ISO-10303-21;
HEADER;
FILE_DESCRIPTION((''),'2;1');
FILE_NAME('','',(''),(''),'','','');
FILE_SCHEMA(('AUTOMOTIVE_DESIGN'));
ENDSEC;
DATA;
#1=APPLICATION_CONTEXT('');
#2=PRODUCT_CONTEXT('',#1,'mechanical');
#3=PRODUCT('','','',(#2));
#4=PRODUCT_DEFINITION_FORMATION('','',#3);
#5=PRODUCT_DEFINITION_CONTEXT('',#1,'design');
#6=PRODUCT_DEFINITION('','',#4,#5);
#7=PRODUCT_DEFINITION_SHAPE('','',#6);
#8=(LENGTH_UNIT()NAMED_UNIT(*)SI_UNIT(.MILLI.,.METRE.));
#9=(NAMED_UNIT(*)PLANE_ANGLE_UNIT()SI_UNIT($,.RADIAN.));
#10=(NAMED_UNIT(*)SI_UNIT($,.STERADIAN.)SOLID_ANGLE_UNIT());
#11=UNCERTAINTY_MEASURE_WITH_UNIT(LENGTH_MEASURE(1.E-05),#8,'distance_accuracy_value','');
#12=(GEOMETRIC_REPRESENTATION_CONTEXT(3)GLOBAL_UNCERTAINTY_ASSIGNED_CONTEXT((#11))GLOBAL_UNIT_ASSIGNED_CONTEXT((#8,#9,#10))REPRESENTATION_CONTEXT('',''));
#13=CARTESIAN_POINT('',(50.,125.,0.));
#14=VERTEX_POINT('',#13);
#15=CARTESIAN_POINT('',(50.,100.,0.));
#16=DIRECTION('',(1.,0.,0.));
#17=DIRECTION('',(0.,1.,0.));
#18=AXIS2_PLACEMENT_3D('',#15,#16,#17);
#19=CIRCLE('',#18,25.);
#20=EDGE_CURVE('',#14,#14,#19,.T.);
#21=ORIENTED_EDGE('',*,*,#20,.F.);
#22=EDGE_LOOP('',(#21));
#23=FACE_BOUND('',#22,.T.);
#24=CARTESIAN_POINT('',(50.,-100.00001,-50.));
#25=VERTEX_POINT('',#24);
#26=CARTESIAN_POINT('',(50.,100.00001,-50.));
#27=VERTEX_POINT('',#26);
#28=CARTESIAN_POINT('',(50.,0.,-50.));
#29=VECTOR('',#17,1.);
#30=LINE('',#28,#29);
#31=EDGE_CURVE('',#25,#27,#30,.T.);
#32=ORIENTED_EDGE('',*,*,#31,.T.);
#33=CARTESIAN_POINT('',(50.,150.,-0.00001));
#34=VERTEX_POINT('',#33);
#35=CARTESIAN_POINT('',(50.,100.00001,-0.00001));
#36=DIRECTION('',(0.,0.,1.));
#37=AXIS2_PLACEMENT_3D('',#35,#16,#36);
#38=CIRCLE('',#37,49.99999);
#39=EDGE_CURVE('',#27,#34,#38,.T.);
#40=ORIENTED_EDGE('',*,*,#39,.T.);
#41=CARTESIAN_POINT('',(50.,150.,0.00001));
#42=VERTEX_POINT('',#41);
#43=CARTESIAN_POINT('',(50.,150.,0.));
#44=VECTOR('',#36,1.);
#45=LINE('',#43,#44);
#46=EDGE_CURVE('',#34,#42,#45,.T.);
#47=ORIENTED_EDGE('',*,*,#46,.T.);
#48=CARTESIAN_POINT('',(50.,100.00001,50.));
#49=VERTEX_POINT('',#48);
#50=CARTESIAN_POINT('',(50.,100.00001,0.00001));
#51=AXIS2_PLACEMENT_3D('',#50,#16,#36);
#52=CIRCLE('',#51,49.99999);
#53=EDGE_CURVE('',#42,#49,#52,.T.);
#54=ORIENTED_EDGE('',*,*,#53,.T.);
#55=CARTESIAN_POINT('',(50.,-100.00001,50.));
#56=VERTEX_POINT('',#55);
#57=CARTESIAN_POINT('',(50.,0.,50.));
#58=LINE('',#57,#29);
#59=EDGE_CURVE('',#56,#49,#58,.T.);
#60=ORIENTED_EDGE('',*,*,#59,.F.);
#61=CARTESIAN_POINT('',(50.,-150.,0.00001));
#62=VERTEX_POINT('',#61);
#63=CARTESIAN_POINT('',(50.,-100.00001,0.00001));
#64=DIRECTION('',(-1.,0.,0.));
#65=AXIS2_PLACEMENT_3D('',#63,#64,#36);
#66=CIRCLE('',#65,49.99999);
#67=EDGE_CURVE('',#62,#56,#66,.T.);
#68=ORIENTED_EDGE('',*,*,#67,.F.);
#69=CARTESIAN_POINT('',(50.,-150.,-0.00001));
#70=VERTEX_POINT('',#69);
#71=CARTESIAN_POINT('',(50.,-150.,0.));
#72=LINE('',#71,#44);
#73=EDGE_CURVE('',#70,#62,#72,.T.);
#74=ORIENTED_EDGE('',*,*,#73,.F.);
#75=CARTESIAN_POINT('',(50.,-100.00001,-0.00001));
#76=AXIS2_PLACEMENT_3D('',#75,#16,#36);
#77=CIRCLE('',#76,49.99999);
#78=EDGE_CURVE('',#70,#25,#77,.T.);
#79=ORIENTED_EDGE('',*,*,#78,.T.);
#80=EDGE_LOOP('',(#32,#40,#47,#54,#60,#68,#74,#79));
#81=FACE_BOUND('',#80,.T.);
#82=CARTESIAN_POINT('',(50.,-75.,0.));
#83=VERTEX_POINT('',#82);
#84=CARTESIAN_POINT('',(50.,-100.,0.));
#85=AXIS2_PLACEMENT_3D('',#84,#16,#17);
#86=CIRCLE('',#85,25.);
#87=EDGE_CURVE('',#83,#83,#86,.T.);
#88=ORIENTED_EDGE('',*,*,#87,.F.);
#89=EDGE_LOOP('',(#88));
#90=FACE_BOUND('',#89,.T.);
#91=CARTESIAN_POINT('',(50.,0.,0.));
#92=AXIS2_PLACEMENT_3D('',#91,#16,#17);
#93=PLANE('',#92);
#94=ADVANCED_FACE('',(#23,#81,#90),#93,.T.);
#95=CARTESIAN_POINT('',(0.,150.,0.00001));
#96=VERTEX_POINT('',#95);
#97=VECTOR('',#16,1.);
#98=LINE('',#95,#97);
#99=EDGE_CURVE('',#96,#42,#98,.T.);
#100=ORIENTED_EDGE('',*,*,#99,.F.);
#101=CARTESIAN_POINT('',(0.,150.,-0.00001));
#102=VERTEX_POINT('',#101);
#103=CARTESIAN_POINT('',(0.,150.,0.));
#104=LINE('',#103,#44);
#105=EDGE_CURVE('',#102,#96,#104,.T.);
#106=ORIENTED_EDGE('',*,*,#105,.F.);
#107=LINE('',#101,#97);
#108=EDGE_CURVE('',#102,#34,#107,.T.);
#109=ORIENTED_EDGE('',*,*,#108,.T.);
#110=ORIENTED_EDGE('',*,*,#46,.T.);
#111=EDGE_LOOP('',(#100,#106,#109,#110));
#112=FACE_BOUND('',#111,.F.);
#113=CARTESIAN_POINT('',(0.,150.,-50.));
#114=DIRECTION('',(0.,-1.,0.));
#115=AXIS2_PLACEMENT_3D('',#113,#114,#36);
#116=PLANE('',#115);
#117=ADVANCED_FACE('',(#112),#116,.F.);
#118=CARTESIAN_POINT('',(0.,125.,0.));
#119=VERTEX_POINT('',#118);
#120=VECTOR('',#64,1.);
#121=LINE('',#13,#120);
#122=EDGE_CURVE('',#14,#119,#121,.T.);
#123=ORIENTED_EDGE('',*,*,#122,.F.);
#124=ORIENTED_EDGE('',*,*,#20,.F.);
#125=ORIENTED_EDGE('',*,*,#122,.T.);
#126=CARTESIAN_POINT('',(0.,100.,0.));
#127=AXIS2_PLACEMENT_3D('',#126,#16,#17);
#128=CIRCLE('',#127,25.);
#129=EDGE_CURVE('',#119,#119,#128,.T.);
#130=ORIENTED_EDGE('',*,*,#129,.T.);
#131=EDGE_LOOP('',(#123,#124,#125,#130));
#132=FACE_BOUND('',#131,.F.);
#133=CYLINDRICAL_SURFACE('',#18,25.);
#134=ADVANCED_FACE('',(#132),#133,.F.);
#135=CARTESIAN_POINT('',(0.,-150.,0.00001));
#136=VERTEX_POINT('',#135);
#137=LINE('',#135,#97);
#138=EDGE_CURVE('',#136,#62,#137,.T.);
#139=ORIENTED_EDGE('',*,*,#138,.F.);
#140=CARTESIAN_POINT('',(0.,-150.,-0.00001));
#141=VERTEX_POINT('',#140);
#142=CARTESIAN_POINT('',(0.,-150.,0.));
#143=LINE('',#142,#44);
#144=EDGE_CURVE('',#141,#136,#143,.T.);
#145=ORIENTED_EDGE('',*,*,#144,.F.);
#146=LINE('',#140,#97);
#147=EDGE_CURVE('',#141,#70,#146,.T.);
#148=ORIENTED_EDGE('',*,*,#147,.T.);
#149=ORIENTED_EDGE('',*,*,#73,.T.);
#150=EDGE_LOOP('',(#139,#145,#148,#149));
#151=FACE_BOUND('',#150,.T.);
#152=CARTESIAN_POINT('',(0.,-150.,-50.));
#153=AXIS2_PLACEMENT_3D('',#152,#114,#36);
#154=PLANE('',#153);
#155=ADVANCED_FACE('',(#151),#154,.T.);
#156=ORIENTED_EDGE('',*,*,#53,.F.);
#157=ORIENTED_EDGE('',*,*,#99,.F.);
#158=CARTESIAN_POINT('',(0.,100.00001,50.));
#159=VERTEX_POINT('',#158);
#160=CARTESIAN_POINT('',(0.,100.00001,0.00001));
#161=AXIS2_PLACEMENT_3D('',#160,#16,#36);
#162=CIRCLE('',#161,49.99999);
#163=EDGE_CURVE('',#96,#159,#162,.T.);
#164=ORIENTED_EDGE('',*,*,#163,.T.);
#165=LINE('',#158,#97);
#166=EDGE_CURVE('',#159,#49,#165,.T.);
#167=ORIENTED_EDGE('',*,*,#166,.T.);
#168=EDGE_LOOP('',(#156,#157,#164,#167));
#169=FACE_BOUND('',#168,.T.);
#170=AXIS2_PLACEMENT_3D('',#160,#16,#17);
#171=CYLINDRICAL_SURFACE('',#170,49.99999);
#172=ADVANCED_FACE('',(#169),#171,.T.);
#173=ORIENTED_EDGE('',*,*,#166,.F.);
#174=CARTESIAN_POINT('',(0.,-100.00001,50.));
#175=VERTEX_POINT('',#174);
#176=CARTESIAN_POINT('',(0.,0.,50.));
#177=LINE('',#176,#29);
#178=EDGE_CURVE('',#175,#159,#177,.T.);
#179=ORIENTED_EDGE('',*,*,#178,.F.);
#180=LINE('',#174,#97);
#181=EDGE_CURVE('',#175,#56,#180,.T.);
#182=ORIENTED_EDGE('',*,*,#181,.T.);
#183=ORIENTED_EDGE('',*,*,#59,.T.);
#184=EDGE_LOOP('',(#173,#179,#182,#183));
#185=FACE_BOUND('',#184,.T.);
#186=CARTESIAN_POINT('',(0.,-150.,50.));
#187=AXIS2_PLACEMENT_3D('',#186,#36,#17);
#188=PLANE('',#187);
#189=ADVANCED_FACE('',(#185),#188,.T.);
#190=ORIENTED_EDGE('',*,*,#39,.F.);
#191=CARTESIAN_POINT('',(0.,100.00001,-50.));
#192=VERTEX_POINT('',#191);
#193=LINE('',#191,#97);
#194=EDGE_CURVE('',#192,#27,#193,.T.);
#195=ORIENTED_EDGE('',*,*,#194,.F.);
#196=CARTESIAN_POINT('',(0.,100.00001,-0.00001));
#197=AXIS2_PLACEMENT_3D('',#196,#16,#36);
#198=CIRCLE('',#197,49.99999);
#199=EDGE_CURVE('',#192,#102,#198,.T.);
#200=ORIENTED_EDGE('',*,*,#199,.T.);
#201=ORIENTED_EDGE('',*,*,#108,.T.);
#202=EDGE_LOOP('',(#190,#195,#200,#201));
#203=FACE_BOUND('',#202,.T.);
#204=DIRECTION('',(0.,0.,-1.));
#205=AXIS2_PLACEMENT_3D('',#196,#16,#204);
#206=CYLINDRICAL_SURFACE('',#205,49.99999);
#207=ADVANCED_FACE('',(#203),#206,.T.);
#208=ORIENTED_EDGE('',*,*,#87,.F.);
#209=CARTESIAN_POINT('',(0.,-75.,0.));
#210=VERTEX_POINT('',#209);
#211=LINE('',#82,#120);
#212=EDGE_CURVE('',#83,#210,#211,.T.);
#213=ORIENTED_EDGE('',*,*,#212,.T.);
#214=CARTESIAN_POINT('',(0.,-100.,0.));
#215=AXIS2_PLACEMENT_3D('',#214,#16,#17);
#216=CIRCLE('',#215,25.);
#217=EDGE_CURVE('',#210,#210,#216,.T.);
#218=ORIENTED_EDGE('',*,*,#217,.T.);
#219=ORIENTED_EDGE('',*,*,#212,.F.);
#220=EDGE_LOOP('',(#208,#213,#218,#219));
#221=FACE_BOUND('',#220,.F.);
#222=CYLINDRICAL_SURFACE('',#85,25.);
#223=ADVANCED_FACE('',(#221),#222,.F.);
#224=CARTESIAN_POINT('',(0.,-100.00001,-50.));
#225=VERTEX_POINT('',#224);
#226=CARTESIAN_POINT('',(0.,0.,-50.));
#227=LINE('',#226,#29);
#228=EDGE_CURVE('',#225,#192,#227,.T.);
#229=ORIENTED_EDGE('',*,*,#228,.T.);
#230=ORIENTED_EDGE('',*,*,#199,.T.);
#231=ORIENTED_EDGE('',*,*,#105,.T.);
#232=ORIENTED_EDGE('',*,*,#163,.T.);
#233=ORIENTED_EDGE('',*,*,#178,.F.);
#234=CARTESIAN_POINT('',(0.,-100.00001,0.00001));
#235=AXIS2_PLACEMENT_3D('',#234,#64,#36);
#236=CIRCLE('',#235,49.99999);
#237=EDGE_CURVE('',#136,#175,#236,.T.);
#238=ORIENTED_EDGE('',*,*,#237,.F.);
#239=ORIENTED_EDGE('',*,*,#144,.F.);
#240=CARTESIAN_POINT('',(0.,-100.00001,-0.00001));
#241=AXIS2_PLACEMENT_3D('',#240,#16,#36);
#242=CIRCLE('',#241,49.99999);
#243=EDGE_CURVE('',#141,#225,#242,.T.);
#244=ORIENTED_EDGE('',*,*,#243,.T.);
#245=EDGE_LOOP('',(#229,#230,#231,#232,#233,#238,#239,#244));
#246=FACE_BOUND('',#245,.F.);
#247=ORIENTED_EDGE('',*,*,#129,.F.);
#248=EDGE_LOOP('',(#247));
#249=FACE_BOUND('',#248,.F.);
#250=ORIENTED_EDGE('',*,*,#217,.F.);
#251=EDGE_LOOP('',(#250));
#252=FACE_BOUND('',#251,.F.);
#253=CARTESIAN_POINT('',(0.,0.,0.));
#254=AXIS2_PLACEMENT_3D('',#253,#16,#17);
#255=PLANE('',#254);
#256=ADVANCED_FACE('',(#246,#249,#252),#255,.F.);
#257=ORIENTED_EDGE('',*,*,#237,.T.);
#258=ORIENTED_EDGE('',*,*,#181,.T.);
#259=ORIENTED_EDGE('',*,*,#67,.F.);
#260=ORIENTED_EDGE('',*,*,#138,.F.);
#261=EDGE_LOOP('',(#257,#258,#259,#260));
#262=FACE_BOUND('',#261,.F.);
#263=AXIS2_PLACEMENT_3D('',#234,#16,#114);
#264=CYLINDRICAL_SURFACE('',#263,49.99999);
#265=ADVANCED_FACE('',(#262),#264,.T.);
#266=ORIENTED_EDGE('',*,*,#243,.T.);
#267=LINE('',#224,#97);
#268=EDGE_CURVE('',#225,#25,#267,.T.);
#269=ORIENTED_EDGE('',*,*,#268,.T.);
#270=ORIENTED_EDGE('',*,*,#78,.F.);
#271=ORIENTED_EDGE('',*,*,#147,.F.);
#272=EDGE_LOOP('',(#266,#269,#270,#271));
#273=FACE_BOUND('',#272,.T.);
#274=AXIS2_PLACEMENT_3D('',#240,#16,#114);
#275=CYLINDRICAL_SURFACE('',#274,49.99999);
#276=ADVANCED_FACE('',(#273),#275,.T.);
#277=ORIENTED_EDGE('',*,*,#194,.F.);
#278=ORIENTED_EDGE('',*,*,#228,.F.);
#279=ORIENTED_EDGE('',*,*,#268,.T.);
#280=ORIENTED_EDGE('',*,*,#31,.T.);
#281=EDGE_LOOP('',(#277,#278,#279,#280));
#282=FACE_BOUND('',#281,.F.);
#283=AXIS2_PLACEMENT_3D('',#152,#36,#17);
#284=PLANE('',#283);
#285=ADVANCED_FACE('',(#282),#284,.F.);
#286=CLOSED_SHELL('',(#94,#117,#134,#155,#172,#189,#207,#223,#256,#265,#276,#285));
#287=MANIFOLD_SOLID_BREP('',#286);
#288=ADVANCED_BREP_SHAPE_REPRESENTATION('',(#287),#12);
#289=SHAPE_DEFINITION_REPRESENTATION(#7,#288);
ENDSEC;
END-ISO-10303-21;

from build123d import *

# Parameters (mm, degrees)
F0_W     = 300
F0_H     = 100
F1_DEPTH = 50
F2_R     = 49.99999
F3_R     = 25
F4_DEPTH = 50


# Not quite as in the source:
# - a fillet or chamfer is up to 0.001 mm smaller than in the source, because OpenCascade refuses the exact size


with BuildPart() as f1:
    # F0 (on Right) → F1 (new body)
    with BuildSketch(Plane.YZ):
        Rectangle(F0_W, F0_H)
    extrude(amount=F1_DEPTH)

    # F2 (radius 50 in the source; OpenCascade refuses exactly that, so slightly less here)
    f2_edges = [f1.edges().sort_by_distance(p)[0] for p in [
        (25, -150, 50),
        (25, -150, -50),
        (25, 150, 50),
        (25, 150, -50),
    ]]
    fillet(f2_edges, radius=F2_R)

    # F3 (on face) → F4 (cut)
    with BuildSketch(Plane.YZ.offset(50)):
        with Locations((-100, 0)):
            Circle(F3_R)
        with Locations((100, 0)):
            Circle(F3_R)
    extrude(amount=-F4_DEPTH, mode=Mode.SUBTRACT)


solid = f1.part
